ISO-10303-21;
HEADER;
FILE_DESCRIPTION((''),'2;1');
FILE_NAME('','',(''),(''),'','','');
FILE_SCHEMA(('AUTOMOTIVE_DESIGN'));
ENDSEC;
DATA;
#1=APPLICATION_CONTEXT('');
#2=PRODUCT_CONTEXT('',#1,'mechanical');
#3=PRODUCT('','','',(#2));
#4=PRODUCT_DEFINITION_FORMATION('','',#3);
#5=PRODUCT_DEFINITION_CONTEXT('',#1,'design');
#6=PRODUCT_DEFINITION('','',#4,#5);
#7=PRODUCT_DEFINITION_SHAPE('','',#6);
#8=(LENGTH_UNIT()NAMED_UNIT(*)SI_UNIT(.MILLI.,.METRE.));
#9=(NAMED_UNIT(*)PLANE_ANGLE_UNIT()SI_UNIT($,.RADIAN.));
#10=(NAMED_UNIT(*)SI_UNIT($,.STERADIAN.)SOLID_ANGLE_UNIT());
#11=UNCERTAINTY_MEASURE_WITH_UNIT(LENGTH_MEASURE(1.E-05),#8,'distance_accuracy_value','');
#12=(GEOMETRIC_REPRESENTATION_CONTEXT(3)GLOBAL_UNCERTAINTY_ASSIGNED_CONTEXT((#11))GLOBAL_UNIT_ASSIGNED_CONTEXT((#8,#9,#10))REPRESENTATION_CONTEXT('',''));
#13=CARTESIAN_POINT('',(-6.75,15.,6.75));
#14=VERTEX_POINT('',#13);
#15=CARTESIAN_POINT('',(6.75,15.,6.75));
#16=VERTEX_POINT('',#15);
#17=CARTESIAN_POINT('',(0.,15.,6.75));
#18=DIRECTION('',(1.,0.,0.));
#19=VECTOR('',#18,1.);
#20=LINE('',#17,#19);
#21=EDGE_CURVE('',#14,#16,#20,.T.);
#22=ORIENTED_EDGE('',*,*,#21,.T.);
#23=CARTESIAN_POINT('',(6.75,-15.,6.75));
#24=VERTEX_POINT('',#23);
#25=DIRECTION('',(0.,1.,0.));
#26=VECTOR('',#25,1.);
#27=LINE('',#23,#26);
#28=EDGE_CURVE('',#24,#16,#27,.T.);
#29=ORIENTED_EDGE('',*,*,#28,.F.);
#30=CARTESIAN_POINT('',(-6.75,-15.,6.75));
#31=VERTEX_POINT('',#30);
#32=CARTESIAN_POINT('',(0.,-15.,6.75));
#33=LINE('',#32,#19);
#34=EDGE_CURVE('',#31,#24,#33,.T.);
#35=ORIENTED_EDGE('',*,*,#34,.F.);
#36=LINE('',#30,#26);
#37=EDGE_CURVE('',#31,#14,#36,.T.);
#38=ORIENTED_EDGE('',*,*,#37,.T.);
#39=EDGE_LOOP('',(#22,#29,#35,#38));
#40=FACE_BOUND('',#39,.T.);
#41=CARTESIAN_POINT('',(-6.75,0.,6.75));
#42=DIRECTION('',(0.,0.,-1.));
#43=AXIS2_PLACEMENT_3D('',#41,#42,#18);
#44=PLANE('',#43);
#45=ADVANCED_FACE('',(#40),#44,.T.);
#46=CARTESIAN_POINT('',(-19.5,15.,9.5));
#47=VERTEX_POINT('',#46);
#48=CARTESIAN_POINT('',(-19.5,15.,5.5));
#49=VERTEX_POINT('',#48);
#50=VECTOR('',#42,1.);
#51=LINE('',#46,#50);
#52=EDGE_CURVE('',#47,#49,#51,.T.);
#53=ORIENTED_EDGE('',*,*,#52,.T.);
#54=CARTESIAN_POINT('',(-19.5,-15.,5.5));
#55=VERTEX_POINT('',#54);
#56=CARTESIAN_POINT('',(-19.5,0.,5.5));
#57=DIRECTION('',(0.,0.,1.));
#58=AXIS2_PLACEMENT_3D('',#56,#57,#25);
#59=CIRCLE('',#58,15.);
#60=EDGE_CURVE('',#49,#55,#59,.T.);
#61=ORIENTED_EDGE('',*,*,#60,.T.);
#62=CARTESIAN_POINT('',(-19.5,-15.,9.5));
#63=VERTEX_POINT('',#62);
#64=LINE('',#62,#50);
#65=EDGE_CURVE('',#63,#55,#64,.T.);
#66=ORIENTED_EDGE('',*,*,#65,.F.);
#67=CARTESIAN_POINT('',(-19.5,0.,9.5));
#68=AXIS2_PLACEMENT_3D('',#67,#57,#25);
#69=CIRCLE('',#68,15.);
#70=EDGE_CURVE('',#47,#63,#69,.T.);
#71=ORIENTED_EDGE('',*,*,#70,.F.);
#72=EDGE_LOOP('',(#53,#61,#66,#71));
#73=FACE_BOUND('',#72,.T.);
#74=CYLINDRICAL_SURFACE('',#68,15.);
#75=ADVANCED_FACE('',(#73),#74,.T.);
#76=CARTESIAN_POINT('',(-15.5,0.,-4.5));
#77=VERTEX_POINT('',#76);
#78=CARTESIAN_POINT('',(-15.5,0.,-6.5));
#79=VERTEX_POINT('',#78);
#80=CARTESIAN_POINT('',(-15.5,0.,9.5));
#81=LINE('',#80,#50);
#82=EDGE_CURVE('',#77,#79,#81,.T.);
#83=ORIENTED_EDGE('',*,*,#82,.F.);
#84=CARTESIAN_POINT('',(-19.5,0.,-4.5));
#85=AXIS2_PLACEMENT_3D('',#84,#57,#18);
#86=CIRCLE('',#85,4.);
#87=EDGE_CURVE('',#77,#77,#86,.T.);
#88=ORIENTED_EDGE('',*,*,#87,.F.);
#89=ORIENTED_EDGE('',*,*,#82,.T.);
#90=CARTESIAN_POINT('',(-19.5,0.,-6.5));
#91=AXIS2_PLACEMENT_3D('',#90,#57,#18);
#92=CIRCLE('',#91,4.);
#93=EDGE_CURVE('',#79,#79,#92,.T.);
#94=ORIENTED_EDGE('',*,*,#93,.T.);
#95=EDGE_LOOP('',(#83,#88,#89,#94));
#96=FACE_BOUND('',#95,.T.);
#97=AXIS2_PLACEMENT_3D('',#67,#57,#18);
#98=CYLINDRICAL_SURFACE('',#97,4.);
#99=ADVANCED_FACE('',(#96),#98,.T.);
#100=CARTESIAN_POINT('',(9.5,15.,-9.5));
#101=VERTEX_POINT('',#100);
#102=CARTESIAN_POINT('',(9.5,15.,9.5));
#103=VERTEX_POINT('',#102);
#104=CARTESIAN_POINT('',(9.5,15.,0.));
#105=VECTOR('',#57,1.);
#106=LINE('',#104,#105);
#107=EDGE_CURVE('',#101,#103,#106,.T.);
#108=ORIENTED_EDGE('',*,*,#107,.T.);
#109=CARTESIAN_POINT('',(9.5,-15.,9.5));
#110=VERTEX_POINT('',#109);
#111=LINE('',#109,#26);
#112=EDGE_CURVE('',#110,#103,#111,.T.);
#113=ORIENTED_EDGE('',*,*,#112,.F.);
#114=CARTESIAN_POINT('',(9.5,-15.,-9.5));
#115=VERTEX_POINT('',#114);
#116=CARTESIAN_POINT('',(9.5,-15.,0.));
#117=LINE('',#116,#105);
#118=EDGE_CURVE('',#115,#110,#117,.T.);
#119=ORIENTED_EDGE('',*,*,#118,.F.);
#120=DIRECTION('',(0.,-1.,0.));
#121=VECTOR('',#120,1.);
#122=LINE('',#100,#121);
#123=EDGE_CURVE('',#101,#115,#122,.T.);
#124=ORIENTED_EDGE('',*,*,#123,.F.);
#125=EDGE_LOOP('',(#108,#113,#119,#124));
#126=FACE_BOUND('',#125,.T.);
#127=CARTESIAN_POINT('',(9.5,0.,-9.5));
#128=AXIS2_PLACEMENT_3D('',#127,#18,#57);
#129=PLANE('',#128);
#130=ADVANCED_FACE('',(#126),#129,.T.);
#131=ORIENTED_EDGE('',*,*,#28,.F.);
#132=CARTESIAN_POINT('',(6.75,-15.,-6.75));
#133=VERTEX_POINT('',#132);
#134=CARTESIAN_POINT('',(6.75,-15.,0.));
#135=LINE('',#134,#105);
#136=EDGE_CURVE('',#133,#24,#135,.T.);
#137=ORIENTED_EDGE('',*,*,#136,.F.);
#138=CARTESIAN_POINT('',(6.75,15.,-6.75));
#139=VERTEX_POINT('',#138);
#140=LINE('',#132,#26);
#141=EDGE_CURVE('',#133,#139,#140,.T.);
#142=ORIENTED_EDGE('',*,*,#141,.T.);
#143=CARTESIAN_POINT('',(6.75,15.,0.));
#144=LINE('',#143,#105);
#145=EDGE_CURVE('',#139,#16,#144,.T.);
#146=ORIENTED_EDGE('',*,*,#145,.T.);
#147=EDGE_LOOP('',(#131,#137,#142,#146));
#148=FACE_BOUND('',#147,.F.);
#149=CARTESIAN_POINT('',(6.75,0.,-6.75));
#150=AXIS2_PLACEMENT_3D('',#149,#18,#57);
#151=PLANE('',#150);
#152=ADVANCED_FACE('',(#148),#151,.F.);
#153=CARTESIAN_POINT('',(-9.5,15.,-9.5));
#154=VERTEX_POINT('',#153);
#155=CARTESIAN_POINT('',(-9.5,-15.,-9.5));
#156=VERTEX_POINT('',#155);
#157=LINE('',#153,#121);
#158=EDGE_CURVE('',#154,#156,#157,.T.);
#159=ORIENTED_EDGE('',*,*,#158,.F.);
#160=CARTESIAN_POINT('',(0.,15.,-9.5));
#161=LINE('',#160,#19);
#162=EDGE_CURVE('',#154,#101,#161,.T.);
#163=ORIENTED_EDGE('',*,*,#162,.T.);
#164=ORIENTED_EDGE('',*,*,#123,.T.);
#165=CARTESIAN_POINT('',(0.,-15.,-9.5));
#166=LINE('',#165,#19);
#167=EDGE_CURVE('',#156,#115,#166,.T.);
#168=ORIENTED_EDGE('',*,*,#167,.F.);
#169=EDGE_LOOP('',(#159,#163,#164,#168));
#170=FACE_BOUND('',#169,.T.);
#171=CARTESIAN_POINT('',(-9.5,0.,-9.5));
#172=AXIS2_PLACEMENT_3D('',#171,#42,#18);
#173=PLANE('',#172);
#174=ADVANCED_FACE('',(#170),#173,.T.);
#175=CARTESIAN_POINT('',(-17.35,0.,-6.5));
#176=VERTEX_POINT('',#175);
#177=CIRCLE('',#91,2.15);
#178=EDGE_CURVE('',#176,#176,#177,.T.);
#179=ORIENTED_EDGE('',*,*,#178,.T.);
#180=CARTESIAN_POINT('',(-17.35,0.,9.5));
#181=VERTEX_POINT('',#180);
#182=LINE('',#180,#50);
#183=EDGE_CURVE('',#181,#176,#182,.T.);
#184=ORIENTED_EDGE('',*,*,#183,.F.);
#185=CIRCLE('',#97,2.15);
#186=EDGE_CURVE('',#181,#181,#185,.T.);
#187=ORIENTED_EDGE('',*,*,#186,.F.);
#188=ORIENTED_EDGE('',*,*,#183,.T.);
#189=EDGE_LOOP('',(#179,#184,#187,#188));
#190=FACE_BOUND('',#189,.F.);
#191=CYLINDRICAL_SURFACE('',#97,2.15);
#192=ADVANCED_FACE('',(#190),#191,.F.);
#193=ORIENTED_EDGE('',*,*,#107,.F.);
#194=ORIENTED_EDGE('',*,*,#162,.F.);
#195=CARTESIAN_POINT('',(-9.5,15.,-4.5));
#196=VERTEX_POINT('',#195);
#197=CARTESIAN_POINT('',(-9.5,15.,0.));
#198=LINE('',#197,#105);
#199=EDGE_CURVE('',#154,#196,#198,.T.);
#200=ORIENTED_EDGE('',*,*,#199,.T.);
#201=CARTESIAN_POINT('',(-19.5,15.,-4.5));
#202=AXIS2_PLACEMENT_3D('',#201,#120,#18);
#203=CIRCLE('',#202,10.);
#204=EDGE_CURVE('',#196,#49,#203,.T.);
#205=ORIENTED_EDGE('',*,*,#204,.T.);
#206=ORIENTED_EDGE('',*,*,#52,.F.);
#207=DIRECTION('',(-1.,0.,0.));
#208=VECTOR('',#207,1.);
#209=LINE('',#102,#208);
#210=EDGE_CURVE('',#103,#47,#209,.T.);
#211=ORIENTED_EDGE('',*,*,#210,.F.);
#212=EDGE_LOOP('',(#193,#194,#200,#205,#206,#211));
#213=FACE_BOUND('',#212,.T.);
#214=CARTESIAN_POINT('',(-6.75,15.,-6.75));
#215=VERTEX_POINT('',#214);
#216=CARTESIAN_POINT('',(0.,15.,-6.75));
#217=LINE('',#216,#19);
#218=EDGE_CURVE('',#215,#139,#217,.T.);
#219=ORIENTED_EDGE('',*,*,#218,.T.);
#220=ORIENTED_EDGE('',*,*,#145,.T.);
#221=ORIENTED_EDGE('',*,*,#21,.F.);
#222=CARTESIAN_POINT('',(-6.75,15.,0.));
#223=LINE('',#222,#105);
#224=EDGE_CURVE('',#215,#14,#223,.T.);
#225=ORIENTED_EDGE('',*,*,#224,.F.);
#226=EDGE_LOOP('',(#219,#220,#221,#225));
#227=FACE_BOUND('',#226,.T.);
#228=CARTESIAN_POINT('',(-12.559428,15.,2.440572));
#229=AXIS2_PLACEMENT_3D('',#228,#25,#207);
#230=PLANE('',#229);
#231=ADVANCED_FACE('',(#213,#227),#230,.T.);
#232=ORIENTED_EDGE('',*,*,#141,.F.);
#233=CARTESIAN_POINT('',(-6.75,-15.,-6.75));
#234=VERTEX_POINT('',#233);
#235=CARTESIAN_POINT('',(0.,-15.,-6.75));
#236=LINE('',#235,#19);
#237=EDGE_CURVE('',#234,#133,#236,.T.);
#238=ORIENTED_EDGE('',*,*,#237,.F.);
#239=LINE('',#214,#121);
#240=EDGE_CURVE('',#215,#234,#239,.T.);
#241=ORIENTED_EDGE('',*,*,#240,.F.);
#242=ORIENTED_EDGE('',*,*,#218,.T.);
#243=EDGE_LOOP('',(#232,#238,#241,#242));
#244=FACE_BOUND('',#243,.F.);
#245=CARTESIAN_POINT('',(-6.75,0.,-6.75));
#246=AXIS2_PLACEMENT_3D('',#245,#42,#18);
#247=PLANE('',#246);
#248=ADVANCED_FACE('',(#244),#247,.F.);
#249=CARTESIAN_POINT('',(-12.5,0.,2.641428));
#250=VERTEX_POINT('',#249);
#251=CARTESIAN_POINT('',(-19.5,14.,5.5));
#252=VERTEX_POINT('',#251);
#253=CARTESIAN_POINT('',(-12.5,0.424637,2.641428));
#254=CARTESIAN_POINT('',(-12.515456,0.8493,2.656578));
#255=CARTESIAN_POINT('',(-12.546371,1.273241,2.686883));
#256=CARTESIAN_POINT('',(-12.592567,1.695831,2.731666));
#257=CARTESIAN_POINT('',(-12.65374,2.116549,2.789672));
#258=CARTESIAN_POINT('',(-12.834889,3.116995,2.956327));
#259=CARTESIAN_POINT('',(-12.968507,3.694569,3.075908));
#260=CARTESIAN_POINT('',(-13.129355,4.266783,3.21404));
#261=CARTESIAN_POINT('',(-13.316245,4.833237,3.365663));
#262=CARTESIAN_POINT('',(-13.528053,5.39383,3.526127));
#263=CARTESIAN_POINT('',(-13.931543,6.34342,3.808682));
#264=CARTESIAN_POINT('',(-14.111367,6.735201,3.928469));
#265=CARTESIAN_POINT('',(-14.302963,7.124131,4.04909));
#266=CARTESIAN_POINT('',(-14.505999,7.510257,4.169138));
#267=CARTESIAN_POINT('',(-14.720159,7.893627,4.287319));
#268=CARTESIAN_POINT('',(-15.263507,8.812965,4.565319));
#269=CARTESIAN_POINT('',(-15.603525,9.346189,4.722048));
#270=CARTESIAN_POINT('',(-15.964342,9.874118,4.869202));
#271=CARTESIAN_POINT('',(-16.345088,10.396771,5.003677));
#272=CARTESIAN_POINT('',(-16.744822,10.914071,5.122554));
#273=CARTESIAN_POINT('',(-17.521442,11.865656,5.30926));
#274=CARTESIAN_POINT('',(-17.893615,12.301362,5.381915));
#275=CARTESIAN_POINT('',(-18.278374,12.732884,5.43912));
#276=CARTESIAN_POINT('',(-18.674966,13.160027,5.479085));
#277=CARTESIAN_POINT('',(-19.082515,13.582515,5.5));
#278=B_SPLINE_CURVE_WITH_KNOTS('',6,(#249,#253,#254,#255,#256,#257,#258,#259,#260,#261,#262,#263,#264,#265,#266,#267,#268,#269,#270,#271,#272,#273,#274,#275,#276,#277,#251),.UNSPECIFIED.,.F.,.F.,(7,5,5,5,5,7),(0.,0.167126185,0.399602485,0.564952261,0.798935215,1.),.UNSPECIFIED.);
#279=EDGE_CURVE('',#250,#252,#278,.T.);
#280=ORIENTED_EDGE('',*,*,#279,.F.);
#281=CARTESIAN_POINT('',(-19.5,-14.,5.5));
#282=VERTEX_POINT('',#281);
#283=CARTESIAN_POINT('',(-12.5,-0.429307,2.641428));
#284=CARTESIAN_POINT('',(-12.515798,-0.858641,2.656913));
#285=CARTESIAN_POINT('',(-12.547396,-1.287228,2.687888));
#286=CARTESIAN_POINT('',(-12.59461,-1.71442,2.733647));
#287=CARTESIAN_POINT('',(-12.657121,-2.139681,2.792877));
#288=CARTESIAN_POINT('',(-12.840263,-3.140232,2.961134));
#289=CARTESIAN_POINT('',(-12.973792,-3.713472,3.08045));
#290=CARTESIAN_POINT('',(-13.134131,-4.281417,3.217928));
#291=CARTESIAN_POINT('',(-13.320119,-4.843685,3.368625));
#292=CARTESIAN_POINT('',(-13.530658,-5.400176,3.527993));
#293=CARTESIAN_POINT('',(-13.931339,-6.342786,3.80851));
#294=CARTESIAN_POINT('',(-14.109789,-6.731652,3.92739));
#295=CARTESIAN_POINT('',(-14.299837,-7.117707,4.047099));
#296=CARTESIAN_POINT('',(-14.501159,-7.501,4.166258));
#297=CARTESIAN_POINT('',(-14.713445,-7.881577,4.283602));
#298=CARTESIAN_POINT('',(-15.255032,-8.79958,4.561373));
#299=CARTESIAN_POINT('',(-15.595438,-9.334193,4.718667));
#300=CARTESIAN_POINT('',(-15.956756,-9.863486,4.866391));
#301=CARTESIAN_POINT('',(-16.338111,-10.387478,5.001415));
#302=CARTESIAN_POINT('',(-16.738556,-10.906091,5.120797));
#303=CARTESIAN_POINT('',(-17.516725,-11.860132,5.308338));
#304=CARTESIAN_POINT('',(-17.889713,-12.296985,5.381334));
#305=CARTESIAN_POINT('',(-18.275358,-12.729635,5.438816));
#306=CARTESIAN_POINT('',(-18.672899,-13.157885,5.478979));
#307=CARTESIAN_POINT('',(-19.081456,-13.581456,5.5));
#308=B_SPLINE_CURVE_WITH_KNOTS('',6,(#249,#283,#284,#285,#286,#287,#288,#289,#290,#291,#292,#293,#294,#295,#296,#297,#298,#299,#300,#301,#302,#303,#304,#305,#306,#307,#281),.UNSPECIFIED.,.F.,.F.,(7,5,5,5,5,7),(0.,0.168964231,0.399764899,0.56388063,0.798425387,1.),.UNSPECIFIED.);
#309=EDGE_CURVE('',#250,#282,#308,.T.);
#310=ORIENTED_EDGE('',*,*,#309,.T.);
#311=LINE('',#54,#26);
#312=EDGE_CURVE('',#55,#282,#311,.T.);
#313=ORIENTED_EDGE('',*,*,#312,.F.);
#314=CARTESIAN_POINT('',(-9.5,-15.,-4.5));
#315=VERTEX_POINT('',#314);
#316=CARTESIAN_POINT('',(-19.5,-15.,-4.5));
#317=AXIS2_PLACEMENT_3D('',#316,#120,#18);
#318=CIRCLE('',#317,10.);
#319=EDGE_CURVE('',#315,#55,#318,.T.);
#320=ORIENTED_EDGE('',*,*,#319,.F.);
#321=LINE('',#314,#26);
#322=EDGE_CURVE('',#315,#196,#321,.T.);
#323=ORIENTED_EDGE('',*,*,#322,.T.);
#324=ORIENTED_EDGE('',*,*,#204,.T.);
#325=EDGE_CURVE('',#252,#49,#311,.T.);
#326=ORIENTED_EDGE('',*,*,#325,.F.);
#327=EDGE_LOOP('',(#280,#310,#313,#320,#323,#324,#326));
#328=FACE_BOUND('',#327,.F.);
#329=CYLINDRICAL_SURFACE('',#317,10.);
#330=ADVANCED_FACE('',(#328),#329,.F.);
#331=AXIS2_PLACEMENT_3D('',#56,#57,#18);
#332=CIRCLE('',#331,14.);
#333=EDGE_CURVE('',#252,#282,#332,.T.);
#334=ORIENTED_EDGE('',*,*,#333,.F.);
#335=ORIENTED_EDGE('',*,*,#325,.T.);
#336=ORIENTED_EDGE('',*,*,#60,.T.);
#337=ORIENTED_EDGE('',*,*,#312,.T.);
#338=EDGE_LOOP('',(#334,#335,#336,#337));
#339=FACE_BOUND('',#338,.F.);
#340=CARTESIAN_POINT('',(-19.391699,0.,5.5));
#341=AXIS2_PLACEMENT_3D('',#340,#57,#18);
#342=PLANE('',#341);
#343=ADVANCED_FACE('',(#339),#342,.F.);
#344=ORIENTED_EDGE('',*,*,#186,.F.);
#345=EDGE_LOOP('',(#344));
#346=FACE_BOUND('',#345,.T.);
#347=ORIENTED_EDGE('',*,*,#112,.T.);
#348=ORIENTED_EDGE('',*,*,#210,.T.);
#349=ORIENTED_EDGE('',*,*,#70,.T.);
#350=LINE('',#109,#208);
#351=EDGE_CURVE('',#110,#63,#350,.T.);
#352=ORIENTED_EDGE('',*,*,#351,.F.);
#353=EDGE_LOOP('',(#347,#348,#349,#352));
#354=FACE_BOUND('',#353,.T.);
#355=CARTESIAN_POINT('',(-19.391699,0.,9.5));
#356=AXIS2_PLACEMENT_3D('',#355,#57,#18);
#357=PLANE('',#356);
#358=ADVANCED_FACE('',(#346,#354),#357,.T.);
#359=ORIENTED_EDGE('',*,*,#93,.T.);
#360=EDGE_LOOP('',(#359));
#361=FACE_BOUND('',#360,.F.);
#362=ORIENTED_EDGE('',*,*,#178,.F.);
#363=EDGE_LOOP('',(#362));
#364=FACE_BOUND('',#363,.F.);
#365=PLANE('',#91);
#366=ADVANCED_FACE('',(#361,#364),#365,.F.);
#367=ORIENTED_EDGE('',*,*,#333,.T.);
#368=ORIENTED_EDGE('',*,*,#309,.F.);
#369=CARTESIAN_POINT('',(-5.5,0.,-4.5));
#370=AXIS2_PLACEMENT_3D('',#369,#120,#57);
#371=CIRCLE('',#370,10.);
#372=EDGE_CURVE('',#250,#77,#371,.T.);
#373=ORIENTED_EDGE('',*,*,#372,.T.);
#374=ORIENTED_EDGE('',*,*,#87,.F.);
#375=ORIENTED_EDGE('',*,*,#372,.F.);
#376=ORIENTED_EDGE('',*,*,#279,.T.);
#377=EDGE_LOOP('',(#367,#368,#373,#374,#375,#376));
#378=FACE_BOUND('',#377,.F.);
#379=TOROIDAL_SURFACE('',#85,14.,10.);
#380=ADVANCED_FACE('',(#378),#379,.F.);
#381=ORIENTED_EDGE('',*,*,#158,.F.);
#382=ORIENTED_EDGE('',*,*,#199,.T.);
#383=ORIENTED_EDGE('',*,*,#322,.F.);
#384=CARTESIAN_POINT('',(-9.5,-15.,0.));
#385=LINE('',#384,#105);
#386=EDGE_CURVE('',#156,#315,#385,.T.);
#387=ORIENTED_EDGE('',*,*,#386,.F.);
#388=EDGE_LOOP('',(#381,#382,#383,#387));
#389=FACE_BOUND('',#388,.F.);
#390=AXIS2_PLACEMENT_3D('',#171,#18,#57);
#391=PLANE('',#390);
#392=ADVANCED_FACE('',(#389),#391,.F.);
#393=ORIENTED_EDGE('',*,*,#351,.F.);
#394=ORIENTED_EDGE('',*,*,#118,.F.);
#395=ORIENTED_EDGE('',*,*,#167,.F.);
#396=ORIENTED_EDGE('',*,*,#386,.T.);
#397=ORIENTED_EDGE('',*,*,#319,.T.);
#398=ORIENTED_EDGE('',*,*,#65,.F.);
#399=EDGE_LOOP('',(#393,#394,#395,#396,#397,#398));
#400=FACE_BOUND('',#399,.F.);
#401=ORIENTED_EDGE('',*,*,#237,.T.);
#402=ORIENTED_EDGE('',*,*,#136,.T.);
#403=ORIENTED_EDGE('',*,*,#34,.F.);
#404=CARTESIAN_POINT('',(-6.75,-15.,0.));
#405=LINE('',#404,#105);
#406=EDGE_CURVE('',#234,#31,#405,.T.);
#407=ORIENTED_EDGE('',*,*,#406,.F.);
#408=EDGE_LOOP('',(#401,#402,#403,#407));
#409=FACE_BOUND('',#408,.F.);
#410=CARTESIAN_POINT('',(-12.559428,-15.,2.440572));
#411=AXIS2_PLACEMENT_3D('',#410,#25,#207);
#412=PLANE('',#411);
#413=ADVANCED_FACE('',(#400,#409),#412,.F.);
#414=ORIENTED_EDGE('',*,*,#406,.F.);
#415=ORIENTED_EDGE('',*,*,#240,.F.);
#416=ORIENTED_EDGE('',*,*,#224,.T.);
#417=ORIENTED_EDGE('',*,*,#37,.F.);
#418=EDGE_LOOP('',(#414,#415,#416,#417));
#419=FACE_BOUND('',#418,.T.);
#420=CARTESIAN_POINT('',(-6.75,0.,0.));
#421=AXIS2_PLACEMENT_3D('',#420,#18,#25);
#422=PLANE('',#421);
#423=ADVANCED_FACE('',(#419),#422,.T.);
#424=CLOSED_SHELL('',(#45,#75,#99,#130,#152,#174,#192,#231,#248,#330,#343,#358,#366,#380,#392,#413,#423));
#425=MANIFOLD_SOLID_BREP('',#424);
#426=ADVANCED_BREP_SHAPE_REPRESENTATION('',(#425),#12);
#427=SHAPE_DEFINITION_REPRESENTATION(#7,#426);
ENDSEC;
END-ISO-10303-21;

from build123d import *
from build123d import SkipClean  # not in build123d's __all__

# Parameters (mm, degrees)
F0_W         = 19
F0_H         = 19
F0_W_2       = 13.5
F0_H_2       = 13.5
F1_DEPTH     = 15
F2_R         = 4
F2_R_2       = 2.15
F3_DEPTH     = 4
F4_DEPTH     = 16
F5_T9_DEPTH  = 30
F5_S10_R     = 2.15
F5_T11_DEPTH = 18


# Not quite as in the source:
# - a fillet or chamfer that OpenCascade refuses, or shapes differently, is made with other operations: its cross-section is extruded or revolved along the edge and cut away or added


with BuildPart() as f1:
    # F0 (on Front) → F1 (new body, symmetric)
    with BuildSketch(Plane.XZ):
        Rectangle(F0_W, F0_H)
        Rectangle(F0_W_2, F0_H_2, mode=Mode.SUBTRACT)
    extrude(amount=F1_DEPTH, both=True)

    # F2 (on face) → F3 (join)
    with BuildSketch(Plane.XY.offset(9.5)):
        with BuildLine():
            Line((-9.5, -15), (-9.5, 15))
            Line((-9.5, 15), (-19.5, 15))
            ThreePointArc((-19.5, 15), (-34.5, 0), (-19.5, -15))
            Line((-19.5, -15), (-9.5, -15))
        make_face()
        with Locations((-19.5, 0)):
            Circle(F2_R, mode=Mode.SUBTRACT)
        with Locations((-19.5, 0)):
            Circle(F2_R)
        with Locations((-19.5, 0)):
            Circle(F2_R_2, mode=Mode.SUBTRACT)
    extrude(amount=-F3_DEPTH)

    # F2 (on face) → F4 (join)
    with BuildSketch(Plane.XY.offset(9.5)):
        with Locations((-19.5, 0)):
            Circle(F2_R)
        with Locations((-19.5, 0)):
            Circle(F2_R_2, mode=Mode.SUBTRACT)
    extrude(amount=-F4_DEPTH)

    # F5: fillet of radius 10 on 2 edges, made by hand


with BuildPart() as f5_tool2:
    # F5_s3 → F5_t4 (revolve)
    with BuildSketch(Plane.XZ):
        with BuildLine():
            ThreePointArc((-5.5, 5.5), (-12.5710678119, 2.5710678119), (-15.5, -4.5))
            Line((-15.5, -4.5), (-15.5, 5.5))
            Line((-15.5, 5.5), (-5.5, 5.5))
        make_face()
    revolve(axis=Axis((-19.5, 0, 5.5), (0, 0, 1)))

    split(bisect_by=Plane.YZ.offset(-6.75), keep=Keep.BOTTOM)


with BuildPart() as f1_1:
    add(f1.part, clean=False)

    # F5_t1: union F5_tool2
    add(f5_tool2.part)


with BuildPart() as f5_tool7:
    # F5_s8 → F5_t9 (new body)
    with BuildSketch(Plane.XZ.offset(15)):
        with BuildLine():
            ThreePointArc((-9.5, -4.5), (-12.4289321881, 2.5710678119), (-19.5, 5.5))
            Line((-19.5, 5.5), (-9.5, 5.5))
            Line((-9.5, 5.5), (-9.5, -4.5))
        make_face()
    extrude(amount=-F5_T9_DEPTH)

    # F5_s10 → F5_t11 (cut, symmetric)
    with BuildSketch(Plane.XY.offset(0.5)):
        with Locations((-19.5, 0)):
            Circle(F5_S10_R)
    with SkipClean():  # cleaning this boolean's faces spoils the solid; the shape is the same uncleaned
        extrude(amount=F5_T11_DEPTH, both=True, mode=Mode.SUBTRACT)


with BuildPart() as f1_2:
    add(f1_1.part, clean=False)

    # F5_t6: union F5_tool7
    add(f5_tool7.part)


solid = f1_2.part
